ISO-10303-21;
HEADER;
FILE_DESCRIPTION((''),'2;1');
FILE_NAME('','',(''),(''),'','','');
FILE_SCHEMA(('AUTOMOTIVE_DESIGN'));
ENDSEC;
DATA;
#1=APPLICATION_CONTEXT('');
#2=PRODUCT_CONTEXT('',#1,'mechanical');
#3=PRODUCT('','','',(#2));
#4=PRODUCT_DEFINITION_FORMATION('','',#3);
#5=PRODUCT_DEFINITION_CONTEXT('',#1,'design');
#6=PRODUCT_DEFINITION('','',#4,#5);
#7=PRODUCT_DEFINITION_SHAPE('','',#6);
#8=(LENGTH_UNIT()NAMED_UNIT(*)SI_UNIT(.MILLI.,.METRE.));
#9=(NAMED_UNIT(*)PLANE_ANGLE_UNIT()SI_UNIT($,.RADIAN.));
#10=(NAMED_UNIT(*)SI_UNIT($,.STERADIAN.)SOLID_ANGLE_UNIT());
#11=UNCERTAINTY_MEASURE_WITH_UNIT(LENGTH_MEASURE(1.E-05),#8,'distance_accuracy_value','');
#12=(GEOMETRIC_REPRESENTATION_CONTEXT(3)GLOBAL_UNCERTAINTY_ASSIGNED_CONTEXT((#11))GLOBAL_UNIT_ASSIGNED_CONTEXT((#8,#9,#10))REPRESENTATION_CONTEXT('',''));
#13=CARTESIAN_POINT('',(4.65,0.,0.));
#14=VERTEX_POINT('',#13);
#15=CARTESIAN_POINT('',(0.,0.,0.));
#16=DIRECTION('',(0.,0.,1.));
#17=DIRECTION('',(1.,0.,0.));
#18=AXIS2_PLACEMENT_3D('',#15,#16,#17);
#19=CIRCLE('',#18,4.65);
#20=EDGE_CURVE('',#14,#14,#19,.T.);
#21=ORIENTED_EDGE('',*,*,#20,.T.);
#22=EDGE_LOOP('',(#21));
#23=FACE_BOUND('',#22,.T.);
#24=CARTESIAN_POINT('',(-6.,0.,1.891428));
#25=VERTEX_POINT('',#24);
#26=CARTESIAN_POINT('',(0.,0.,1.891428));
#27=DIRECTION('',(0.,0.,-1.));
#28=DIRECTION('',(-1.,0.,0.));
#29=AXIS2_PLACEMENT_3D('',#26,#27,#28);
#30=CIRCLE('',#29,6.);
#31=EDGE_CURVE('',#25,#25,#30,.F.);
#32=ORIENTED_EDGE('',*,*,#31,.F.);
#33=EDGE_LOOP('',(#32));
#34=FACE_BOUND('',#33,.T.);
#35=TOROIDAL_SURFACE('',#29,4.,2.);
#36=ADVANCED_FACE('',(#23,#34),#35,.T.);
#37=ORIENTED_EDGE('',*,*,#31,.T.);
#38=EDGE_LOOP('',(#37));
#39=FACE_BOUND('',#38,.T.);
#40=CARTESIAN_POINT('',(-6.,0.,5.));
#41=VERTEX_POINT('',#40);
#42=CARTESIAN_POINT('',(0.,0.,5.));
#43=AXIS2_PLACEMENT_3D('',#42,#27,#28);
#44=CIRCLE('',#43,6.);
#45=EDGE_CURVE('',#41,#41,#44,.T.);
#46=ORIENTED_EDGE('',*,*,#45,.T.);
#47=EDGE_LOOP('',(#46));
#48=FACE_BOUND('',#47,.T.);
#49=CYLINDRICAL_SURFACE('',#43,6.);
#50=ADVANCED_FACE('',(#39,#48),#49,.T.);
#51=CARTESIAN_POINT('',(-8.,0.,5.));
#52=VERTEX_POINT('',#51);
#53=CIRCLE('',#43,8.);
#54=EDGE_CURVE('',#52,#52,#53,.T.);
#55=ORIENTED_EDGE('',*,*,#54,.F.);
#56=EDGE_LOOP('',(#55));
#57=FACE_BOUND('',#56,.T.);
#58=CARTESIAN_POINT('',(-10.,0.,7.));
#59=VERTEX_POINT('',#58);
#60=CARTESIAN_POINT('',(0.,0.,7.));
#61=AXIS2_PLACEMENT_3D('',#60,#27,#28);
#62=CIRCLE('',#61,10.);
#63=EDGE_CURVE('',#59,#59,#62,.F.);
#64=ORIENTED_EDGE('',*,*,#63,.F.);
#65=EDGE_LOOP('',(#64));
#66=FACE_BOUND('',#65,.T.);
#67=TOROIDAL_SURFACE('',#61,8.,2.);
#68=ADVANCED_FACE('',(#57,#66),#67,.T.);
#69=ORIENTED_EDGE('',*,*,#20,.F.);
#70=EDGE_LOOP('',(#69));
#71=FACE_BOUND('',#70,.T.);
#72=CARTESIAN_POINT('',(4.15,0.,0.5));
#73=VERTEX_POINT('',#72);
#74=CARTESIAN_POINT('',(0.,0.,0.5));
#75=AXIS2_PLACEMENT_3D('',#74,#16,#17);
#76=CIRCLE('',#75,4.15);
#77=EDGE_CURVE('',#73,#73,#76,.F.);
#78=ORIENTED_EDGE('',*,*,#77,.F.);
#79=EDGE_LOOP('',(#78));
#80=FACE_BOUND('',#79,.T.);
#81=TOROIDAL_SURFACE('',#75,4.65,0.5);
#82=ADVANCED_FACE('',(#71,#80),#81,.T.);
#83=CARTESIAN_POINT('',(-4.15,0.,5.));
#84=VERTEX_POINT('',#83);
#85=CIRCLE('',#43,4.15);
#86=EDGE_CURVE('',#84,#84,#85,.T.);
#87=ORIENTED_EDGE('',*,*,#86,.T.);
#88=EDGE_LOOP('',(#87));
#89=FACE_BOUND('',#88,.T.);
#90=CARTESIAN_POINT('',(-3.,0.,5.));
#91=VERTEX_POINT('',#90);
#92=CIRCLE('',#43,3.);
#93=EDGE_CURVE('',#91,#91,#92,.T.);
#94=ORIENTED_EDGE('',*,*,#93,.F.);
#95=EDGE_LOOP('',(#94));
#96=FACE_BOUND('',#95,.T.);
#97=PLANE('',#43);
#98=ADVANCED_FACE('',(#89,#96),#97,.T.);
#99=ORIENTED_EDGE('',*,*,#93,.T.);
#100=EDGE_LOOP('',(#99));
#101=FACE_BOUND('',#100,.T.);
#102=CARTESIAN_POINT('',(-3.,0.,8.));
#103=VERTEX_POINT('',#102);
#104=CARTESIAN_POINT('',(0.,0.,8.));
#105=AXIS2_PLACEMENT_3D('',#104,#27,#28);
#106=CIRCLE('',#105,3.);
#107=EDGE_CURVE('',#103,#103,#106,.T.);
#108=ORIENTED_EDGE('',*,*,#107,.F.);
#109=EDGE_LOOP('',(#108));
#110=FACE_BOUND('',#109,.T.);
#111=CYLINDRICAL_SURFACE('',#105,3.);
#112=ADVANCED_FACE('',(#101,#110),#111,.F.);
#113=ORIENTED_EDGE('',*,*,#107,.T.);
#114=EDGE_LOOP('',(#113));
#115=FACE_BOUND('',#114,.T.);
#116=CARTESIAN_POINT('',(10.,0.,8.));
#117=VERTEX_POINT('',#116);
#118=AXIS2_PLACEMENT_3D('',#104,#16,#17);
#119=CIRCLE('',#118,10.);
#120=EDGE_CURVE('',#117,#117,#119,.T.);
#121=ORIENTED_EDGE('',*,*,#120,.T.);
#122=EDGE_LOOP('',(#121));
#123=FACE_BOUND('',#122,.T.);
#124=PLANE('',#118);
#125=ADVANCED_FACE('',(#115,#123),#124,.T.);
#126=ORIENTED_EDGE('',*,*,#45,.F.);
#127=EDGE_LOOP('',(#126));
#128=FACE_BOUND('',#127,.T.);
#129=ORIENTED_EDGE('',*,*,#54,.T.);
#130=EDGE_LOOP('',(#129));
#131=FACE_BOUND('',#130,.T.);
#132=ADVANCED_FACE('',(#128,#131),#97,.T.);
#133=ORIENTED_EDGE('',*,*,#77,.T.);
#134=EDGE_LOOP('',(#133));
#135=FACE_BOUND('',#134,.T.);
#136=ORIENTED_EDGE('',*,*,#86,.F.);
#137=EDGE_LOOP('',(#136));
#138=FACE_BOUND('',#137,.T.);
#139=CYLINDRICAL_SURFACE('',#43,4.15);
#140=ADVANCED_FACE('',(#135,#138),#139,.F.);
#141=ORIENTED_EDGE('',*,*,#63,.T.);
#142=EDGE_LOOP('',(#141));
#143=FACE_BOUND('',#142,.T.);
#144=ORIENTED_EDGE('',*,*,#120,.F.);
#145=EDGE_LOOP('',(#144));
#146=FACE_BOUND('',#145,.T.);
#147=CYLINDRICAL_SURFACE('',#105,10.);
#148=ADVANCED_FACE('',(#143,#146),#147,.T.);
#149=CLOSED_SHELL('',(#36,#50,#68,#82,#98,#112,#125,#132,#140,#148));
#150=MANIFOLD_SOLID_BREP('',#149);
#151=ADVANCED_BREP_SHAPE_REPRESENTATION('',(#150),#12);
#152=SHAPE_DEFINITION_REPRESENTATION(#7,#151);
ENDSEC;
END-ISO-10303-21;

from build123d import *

# Parameters (mm, degrees)
SKETCH_1_R          = 10
EXTRUDE_1_DEPTH     = 8
SKETCH_2_R          = 4.15
CUT_EXTRUDE_1_DEPTH = 5
SKETCH_3_R          = 11.188676277
SKETCH_3_R_2        = 6
CUT_EXTRUDE_2_DEPTH = 5
FILLET_1_R          = 0.5
FILLET_2_R          = 2
SKETCH_4_R          = 3
CUT_EXTRUDE_3_DEPTH = 16


with BuildPart() as part:
    # 草图1 → 凸台-拉伸1 (new body)
    with BuildSketch(Plane.XY):
        Circle(SKETCH_1_R)
    extrude(amount=EXTRUDE_1_DEPTH)

    # 草图2 → 切除-拉伸1 (cut)
    with BuildSketch(Plane(origin=(0, 0, 0), x_dir=(-1, 0, 0), z_dir=(0, 0, -1))):
        Circle(SKETCH_2_R)
    extrude(amount=-CUT_EXTRUDE_1_DEPTH, mode=Mode.SUBTRACT)

    # 草图3 → 切除-拉伸2 (cut)
    with BuildSketch(Plane(origin=(0, 0, 0), x_dir=(-1, 0, 0), z_dir=(0, 0, -1))):
        Circle(SKETCH_3_R)
        Circle(SKETCH_3_R_2, mode=Mode.SUBTRACT)
    extrude(amount=-CUT_EXTRUDE_2_DEPTH, mode=Mode.SUBTRACT)

    # 圆角1
    fillet_1_edges = [part.edges().sort_by_distance(p)[0] for p in [
        (4.15, 0, 0),
    ]]
    fillet(fillet_1_edges, radius=FILLET_1_R)

    # 圆角2
    # the kernel refuses this fillet: 2 mm, written as the material it takes off along each edge
    with BuildSketch(Plane(origin=(0, 0, 5), x_dir=(1, 0, 0), z_dir=(0, 1, 0))) as fillet_2_piece_1:
        with BuildLine():
            CenterArc((10 - FILLET_2_R, -FILLET_2_R), FILLET_2_R, 0, 90)
            Line((10, -FILLET_2_R), (10, 0))
            Line((10, 0), (10 - FILLET_2_R, 0))
        make_face()
    revolve(axis=Axis((0, 0, 5), (0, 0, -1)), mode=Mode.SUBTRACT)
    with BuildSketch(Plane(origin=(0, 0, 0), x_dir=(-1, 0, 0), z_dir=(0, -1, 0))) as fillet_2_piece_2:
        with BuildLine():
            CenterArc((4, -1.891428032), FILLET_2_R, 0, 71.034425011)
            Line((6, -1.891428032), (6, 0))
            Line((6, 0), (4.65, 0))
        make_face()
    revolve(axis=Axis((0, 0, 0), (0, 0, -1)), mode=Mode.SUBTRACT)

    # 草图4 → 切除-拉伸3 (cut, through all)
    with BuildSketch(Plane(origin=(0, 0, 5), x_dir=(-1, 0, 0), z_dir=(0, 0, -1))):
        Circle(SKETCH_4_R)
    extrude(amount=-CUT_EXTRUDE_3_DEPTH, mode=Mode.SUBTRACT)


solid = part.part
